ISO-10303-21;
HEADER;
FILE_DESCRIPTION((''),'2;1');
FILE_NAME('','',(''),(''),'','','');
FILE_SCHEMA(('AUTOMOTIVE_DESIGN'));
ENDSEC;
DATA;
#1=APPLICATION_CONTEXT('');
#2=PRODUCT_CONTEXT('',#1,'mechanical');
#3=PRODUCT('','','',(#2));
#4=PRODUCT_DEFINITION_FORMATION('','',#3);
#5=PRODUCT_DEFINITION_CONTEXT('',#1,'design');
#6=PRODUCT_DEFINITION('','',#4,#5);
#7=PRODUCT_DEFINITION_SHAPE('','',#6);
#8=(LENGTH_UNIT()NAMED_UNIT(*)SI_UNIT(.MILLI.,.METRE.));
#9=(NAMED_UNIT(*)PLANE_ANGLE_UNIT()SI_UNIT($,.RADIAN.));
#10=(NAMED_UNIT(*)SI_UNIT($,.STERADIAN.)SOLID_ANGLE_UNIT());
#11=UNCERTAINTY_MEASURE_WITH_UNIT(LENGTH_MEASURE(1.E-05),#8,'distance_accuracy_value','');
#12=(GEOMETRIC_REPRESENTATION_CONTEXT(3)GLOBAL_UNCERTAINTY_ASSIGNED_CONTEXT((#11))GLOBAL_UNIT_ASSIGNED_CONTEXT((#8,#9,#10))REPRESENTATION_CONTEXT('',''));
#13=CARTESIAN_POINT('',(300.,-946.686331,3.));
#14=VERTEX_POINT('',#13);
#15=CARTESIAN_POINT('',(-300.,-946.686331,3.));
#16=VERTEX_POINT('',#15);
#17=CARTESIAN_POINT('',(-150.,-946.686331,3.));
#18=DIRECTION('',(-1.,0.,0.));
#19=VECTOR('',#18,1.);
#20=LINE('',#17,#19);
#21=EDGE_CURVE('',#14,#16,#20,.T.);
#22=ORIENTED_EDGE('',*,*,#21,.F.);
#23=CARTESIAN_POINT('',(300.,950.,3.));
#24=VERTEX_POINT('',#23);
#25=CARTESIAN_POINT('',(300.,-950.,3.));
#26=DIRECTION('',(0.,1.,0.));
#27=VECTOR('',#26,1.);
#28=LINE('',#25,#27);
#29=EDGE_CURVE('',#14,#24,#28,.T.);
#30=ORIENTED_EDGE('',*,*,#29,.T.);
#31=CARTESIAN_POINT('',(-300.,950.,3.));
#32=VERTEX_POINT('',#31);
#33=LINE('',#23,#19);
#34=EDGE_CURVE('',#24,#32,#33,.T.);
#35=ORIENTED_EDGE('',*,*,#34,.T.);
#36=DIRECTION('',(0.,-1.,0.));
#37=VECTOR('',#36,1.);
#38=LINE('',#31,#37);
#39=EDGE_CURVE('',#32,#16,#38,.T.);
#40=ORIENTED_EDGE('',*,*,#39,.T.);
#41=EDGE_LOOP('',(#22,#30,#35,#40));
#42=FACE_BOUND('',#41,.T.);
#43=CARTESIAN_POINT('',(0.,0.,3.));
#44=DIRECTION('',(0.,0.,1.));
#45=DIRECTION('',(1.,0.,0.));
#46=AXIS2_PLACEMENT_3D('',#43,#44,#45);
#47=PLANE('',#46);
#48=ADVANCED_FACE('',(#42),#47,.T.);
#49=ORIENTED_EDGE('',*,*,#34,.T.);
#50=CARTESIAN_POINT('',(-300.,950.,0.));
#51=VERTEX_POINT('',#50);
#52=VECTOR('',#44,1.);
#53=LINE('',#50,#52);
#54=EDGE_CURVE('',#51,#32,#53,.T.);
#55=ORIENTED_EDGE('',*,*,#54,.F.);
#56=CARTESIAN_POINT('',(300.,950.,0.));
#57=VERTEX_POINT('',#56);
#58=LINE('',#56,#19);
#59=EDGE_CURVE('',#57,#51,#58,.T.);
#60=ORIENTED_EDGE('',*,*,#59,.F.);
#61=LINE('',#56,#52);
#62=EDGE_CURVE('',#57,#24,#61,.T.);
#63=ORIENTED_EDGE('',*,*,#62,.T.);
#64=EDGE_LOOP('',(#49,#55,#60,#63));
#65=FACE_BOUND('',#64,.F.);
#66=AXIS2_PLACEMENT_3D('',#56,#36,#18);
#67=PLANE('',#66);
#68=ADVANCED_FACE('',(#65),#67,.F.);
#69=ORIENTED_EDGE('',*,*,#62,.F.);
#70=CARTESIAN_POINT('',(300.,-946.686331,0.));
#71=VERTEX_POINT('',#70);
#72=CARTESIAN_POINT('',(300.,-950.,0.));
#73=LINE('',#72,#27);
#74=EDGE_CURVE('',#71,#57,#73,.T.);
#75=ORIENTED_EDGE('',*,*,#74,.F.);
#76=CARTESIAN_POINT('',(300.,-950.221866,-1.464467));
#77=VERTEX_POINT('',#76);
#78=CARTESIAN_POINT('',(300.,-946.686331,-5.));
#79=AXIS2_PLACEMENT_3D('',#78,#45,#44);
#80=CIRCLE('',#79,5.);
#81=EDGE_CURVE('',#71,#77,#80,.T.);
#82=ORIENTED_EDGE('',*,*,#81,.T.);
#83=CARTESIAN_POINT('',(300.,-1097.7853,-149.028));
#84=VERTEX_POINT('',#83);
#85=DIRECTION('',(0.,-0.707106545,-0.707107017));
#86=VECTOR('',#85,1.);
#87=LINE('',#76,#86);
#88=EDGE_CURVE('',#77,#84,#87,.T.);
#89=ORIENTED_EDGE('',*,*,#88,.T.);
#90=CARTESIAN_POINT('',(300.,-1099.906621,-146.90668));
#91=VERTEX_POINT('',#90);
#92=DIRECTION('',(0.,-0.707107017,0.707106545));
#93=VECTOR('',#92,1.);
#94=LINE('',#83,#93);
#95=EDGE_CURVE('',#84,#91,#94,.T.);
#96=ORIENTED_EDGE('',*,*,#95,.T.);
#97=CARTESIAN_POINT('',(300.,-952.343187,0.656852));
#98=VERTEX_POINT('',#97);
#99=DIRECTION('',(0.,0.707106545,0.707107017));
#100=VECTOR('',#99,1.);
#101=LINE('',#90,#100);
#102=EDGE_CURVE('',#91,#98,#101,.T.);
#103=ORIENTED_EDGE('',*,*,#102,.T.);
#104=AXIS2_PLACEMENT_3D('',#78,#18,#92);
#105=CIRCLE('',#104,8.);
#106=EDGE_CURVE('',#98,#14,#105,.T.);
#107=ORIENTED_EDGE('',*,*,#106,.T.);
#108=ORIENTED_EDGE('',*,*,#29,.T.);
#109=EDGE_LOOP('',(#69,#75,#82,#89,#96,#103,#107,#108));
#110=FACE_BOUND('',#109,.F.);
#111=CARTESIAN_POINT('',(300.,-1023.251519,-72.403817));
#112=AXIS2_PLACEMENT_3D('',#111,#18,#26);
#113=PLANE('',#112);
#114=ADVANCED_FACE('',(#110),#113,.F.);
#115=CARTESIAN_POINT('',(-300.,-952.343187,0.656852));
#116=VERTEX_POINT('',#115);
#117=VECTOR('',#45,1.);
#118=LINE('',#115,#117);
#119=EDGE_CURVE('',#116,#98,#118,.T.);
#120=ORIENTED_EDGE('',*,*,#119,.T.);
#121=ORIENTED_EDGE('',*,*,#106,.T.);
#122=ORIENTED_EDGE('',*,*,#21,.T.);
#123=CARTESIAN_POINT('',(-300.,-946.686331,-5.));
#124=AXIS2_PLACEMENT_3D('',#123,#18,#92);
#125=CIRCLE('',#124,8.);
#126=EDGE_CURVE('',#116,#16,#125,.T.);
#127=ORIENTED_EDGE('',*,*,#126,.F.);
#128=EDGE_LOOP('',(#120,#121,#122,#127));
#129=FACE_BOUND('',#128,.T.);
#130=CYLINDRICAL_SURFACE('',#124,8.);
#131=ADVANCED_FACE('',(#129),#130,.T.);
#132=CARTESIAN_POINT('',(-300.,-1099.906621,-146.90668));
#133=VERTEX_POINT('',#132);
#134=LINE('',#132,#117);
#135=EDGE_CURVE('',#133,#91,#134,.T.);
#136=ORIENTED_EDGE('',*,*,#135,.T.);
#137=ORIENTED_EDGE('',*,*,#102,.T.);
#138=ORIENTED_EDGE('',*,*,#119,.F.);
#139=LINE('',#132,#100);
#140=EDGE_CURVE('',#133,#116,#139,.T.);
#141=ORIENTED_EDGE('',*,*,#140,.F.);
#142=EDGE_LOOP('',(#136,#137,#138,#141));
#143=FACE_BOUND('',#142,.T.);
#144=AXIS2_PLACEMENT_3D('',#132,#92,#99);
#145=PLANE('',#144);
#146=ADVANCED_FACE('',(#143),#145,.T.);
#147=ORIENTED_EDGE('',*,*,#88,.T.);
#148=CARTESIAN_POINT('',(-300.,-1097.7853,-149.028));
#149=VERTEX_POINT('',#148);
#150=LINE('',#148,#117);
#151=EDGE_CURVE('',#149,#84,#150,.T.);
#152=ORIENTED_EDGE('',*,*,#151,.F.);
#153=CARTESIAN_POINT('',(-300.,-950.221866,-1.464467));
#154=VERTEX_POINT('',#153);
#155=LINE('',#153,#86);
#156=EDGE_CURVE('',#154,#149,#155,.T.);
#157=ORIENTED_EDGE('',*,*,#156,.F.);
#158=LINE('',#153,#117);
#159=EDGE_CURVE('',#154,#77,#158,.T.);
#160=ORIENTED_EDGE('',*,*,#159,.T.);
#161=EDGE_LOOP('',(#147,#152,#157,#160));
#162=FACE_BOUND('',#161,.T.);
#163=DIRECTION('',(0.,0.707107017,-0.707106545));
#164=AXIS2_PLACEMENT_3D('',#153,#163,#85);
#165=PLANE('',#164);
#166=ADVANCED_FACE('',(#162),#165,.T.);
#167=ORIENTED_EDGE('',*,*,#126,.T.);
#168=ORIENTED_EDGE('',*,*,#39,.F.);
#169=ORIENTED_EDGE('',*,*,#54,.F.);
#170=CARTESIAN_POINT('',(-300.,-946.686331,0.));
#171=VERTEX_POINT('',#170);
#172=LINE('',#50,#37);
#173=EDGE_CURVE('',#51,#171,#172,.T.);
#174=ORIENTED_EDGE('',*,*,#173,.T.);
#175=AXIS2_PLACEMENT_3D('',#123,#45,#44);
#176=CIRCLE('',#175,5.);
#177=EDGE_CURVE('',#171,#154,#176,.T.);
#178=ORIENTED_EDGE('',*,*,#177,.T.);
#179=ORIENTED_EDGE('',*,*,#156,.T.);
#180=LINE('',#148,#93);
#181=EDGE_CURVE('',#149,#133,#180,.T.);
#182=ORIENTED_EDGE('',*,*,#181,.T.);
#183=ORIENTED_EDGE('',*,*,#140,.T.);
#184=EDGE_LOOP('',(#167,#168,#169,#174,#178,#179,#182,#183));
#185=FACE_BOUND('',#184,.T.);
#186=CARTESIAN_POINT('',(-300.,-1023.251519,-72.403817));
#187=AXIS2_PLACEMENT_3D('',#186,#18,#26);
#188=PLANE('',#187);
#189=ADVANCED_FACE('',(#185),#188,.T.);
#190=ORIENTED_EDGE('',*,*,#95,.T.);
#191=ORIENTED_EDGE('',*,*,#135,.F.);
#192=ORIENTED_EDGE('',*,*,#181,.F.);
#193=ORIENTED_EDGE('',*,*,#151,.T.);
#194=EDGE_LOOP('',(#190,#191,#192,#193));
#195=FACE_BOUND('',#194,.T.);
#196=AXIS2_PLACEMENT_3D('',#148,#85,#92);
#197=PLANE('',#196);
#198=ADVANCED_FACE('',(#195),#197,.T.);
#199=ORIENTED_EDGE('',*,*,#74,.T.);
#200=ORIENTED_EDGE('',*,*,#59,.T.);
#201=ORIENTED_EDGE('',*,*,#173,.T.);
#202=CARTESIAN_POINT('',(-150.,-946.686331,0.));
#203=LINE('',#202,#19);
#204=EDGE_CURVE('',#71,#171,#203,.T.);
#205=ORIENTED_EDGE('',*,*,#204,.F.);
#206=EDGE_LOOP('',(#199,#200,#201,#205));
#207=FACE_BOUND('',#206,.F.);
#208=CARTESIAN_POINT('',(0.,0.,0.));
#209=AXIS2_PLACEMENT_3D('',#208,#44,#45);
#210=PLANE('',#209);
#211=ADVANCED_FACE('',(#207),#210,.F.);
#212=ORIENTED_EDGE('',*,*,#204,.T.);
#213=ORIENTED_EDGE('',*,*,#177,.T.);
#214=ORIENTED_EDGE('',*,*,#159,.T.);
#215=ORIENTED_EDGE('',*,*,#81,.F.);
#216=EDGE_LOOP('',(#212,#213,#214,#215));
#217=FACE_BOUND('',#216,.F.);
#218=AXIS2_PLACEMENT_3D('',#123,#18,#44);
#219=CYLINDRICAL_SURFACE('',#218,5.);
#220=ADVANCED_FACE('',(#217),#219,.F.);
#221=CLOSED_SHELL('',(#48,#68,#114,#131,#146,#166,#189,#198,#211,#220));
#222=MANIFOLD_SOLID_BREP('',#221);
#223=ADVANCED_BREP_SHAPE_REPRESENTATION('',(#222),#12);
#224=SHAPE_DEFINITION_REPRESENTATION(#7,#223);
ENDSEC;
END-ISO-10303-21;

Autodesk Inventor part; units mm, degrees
ref_plane "YZ Plane" through (0, 0, 0) normal (1, 0, 0) x (0, 1, 0)
ref_plane "XZ Plane" through (0, 0, 0) normal (0, 1, 0) x (-1, 0, 0)
ref_plane "XY Plane" through (0, 0, 0) normal (0, 0, 1) x (1, 0, 0)
sketch "Sketch1" plane through (0, 0, 0) normal (0, 0, 1) x (1, 0, 0)
  line L0 (-300, -950) -> (300, -950)
  line L1 (300, -950) -> (300, 950)
  line L2 (300, 950) -> (-300, 950)
  line L3 (-300, 950) -> (-300, -950)
  line L4 (-300, -950) -> (300, 950) construction
  line L5 (300, -950) -> (-300, 950) construction
  point P0 (0, 0)
  dimension "d0" = 600
  dimension "d1" = 1900
extrude "Plate1" add sketch "Sketch1" along normal blind 3
sketch "Sketch3" plane through (-300, -947.8787, 0.8787) normal (0, -0.7071068, 0.7071068) x (1, 0, 0)
  line L0 (600, 0) -> (0, 0)
  line L1 (0, 0) -> (0, -212)
  line L2 (0, -212) -> (600, -212)
  line L3 (600, -212) -> (600, 0)
edge flange "Flange2" height 212 angle 45 thickness 3 bend radius 5 thickness toward (0, -0.7071068, 0.7071068) relief round relief width 3 relief depth 1.5 edges at (0, -950, 0) wall of the first edge with corners at (300, -947.8787, 0.8787) (-300, -947.8787, 0.8787) (-300, -1097.7853, -149.028) (300, -1097.7853, -149.028)
bend "Bend2"
corner "Corner2"
sketch "Sketch4" plane through (300, -1097.7853, -149.028) normal (0, 0.7071068, -0.7071068) x (-1, 0, 0)
  point P0 (300, 881.6301)
sketch "Sketch5" plane through (300, -1097.7853, -149.028) normal (0, 0.7071068, -0.7071068) x (-1, 0, 0)
  line L0 (575, 36.661) -> (575, 25) construction
  line L1 (575, 25) -> (375, 25) construction
  line L2 (375, 25) -> (375, 36.661) construction
  line L3 (375, 36.661) -> (575, 36.661) construction
  line L4 (0, 0) -> (600, 0) projected
  line L5 (600, 208.6863) -> (600, 0) projected
  point P0 (300, 881.6301)
  point P1 (575, 30.8305)
  dimension "d23" = 200
  dimension "d24" = 11.661
  dimension "d25" = 25
  dimension "d26" = 25
mark "Mark1"
equation "\"d2\" = Thickness"
equation "\"d13\" = BendReliefWidth"
equation "\"d14\" = BendReliefDepth"
equation "\"d15\" = MinimumRemnant"
equation "\"d16\" = TransitionRadius"
equation "\"d19\" = BendRadius"
equation "\"d20\" = CornerReliefSize"
equation "\"d21\" = GapSize"
equation "\"d22\" = JacobiRadiusSize"
equation "\"BendReliefWidth\" = Thickness"
equation "\"BendReliefDepth\" = 0.5 * Thickness"
equation "\"CornerReliefSize\" = 4 * Thickness"
equation "\"MinimumRemnant\" = 2 * Thickness"
equation "\"TransitionRadius\" = BendRadius"
equation "\"JacobiRadiusSize\" = BendRadius"
equation "\"GapSize\" = Thickness"
equation "\"Thickness\" = 3"
equation "\"BendRadius\" = 5"
properties part number "BSH 013 floor" material "09g2s"
